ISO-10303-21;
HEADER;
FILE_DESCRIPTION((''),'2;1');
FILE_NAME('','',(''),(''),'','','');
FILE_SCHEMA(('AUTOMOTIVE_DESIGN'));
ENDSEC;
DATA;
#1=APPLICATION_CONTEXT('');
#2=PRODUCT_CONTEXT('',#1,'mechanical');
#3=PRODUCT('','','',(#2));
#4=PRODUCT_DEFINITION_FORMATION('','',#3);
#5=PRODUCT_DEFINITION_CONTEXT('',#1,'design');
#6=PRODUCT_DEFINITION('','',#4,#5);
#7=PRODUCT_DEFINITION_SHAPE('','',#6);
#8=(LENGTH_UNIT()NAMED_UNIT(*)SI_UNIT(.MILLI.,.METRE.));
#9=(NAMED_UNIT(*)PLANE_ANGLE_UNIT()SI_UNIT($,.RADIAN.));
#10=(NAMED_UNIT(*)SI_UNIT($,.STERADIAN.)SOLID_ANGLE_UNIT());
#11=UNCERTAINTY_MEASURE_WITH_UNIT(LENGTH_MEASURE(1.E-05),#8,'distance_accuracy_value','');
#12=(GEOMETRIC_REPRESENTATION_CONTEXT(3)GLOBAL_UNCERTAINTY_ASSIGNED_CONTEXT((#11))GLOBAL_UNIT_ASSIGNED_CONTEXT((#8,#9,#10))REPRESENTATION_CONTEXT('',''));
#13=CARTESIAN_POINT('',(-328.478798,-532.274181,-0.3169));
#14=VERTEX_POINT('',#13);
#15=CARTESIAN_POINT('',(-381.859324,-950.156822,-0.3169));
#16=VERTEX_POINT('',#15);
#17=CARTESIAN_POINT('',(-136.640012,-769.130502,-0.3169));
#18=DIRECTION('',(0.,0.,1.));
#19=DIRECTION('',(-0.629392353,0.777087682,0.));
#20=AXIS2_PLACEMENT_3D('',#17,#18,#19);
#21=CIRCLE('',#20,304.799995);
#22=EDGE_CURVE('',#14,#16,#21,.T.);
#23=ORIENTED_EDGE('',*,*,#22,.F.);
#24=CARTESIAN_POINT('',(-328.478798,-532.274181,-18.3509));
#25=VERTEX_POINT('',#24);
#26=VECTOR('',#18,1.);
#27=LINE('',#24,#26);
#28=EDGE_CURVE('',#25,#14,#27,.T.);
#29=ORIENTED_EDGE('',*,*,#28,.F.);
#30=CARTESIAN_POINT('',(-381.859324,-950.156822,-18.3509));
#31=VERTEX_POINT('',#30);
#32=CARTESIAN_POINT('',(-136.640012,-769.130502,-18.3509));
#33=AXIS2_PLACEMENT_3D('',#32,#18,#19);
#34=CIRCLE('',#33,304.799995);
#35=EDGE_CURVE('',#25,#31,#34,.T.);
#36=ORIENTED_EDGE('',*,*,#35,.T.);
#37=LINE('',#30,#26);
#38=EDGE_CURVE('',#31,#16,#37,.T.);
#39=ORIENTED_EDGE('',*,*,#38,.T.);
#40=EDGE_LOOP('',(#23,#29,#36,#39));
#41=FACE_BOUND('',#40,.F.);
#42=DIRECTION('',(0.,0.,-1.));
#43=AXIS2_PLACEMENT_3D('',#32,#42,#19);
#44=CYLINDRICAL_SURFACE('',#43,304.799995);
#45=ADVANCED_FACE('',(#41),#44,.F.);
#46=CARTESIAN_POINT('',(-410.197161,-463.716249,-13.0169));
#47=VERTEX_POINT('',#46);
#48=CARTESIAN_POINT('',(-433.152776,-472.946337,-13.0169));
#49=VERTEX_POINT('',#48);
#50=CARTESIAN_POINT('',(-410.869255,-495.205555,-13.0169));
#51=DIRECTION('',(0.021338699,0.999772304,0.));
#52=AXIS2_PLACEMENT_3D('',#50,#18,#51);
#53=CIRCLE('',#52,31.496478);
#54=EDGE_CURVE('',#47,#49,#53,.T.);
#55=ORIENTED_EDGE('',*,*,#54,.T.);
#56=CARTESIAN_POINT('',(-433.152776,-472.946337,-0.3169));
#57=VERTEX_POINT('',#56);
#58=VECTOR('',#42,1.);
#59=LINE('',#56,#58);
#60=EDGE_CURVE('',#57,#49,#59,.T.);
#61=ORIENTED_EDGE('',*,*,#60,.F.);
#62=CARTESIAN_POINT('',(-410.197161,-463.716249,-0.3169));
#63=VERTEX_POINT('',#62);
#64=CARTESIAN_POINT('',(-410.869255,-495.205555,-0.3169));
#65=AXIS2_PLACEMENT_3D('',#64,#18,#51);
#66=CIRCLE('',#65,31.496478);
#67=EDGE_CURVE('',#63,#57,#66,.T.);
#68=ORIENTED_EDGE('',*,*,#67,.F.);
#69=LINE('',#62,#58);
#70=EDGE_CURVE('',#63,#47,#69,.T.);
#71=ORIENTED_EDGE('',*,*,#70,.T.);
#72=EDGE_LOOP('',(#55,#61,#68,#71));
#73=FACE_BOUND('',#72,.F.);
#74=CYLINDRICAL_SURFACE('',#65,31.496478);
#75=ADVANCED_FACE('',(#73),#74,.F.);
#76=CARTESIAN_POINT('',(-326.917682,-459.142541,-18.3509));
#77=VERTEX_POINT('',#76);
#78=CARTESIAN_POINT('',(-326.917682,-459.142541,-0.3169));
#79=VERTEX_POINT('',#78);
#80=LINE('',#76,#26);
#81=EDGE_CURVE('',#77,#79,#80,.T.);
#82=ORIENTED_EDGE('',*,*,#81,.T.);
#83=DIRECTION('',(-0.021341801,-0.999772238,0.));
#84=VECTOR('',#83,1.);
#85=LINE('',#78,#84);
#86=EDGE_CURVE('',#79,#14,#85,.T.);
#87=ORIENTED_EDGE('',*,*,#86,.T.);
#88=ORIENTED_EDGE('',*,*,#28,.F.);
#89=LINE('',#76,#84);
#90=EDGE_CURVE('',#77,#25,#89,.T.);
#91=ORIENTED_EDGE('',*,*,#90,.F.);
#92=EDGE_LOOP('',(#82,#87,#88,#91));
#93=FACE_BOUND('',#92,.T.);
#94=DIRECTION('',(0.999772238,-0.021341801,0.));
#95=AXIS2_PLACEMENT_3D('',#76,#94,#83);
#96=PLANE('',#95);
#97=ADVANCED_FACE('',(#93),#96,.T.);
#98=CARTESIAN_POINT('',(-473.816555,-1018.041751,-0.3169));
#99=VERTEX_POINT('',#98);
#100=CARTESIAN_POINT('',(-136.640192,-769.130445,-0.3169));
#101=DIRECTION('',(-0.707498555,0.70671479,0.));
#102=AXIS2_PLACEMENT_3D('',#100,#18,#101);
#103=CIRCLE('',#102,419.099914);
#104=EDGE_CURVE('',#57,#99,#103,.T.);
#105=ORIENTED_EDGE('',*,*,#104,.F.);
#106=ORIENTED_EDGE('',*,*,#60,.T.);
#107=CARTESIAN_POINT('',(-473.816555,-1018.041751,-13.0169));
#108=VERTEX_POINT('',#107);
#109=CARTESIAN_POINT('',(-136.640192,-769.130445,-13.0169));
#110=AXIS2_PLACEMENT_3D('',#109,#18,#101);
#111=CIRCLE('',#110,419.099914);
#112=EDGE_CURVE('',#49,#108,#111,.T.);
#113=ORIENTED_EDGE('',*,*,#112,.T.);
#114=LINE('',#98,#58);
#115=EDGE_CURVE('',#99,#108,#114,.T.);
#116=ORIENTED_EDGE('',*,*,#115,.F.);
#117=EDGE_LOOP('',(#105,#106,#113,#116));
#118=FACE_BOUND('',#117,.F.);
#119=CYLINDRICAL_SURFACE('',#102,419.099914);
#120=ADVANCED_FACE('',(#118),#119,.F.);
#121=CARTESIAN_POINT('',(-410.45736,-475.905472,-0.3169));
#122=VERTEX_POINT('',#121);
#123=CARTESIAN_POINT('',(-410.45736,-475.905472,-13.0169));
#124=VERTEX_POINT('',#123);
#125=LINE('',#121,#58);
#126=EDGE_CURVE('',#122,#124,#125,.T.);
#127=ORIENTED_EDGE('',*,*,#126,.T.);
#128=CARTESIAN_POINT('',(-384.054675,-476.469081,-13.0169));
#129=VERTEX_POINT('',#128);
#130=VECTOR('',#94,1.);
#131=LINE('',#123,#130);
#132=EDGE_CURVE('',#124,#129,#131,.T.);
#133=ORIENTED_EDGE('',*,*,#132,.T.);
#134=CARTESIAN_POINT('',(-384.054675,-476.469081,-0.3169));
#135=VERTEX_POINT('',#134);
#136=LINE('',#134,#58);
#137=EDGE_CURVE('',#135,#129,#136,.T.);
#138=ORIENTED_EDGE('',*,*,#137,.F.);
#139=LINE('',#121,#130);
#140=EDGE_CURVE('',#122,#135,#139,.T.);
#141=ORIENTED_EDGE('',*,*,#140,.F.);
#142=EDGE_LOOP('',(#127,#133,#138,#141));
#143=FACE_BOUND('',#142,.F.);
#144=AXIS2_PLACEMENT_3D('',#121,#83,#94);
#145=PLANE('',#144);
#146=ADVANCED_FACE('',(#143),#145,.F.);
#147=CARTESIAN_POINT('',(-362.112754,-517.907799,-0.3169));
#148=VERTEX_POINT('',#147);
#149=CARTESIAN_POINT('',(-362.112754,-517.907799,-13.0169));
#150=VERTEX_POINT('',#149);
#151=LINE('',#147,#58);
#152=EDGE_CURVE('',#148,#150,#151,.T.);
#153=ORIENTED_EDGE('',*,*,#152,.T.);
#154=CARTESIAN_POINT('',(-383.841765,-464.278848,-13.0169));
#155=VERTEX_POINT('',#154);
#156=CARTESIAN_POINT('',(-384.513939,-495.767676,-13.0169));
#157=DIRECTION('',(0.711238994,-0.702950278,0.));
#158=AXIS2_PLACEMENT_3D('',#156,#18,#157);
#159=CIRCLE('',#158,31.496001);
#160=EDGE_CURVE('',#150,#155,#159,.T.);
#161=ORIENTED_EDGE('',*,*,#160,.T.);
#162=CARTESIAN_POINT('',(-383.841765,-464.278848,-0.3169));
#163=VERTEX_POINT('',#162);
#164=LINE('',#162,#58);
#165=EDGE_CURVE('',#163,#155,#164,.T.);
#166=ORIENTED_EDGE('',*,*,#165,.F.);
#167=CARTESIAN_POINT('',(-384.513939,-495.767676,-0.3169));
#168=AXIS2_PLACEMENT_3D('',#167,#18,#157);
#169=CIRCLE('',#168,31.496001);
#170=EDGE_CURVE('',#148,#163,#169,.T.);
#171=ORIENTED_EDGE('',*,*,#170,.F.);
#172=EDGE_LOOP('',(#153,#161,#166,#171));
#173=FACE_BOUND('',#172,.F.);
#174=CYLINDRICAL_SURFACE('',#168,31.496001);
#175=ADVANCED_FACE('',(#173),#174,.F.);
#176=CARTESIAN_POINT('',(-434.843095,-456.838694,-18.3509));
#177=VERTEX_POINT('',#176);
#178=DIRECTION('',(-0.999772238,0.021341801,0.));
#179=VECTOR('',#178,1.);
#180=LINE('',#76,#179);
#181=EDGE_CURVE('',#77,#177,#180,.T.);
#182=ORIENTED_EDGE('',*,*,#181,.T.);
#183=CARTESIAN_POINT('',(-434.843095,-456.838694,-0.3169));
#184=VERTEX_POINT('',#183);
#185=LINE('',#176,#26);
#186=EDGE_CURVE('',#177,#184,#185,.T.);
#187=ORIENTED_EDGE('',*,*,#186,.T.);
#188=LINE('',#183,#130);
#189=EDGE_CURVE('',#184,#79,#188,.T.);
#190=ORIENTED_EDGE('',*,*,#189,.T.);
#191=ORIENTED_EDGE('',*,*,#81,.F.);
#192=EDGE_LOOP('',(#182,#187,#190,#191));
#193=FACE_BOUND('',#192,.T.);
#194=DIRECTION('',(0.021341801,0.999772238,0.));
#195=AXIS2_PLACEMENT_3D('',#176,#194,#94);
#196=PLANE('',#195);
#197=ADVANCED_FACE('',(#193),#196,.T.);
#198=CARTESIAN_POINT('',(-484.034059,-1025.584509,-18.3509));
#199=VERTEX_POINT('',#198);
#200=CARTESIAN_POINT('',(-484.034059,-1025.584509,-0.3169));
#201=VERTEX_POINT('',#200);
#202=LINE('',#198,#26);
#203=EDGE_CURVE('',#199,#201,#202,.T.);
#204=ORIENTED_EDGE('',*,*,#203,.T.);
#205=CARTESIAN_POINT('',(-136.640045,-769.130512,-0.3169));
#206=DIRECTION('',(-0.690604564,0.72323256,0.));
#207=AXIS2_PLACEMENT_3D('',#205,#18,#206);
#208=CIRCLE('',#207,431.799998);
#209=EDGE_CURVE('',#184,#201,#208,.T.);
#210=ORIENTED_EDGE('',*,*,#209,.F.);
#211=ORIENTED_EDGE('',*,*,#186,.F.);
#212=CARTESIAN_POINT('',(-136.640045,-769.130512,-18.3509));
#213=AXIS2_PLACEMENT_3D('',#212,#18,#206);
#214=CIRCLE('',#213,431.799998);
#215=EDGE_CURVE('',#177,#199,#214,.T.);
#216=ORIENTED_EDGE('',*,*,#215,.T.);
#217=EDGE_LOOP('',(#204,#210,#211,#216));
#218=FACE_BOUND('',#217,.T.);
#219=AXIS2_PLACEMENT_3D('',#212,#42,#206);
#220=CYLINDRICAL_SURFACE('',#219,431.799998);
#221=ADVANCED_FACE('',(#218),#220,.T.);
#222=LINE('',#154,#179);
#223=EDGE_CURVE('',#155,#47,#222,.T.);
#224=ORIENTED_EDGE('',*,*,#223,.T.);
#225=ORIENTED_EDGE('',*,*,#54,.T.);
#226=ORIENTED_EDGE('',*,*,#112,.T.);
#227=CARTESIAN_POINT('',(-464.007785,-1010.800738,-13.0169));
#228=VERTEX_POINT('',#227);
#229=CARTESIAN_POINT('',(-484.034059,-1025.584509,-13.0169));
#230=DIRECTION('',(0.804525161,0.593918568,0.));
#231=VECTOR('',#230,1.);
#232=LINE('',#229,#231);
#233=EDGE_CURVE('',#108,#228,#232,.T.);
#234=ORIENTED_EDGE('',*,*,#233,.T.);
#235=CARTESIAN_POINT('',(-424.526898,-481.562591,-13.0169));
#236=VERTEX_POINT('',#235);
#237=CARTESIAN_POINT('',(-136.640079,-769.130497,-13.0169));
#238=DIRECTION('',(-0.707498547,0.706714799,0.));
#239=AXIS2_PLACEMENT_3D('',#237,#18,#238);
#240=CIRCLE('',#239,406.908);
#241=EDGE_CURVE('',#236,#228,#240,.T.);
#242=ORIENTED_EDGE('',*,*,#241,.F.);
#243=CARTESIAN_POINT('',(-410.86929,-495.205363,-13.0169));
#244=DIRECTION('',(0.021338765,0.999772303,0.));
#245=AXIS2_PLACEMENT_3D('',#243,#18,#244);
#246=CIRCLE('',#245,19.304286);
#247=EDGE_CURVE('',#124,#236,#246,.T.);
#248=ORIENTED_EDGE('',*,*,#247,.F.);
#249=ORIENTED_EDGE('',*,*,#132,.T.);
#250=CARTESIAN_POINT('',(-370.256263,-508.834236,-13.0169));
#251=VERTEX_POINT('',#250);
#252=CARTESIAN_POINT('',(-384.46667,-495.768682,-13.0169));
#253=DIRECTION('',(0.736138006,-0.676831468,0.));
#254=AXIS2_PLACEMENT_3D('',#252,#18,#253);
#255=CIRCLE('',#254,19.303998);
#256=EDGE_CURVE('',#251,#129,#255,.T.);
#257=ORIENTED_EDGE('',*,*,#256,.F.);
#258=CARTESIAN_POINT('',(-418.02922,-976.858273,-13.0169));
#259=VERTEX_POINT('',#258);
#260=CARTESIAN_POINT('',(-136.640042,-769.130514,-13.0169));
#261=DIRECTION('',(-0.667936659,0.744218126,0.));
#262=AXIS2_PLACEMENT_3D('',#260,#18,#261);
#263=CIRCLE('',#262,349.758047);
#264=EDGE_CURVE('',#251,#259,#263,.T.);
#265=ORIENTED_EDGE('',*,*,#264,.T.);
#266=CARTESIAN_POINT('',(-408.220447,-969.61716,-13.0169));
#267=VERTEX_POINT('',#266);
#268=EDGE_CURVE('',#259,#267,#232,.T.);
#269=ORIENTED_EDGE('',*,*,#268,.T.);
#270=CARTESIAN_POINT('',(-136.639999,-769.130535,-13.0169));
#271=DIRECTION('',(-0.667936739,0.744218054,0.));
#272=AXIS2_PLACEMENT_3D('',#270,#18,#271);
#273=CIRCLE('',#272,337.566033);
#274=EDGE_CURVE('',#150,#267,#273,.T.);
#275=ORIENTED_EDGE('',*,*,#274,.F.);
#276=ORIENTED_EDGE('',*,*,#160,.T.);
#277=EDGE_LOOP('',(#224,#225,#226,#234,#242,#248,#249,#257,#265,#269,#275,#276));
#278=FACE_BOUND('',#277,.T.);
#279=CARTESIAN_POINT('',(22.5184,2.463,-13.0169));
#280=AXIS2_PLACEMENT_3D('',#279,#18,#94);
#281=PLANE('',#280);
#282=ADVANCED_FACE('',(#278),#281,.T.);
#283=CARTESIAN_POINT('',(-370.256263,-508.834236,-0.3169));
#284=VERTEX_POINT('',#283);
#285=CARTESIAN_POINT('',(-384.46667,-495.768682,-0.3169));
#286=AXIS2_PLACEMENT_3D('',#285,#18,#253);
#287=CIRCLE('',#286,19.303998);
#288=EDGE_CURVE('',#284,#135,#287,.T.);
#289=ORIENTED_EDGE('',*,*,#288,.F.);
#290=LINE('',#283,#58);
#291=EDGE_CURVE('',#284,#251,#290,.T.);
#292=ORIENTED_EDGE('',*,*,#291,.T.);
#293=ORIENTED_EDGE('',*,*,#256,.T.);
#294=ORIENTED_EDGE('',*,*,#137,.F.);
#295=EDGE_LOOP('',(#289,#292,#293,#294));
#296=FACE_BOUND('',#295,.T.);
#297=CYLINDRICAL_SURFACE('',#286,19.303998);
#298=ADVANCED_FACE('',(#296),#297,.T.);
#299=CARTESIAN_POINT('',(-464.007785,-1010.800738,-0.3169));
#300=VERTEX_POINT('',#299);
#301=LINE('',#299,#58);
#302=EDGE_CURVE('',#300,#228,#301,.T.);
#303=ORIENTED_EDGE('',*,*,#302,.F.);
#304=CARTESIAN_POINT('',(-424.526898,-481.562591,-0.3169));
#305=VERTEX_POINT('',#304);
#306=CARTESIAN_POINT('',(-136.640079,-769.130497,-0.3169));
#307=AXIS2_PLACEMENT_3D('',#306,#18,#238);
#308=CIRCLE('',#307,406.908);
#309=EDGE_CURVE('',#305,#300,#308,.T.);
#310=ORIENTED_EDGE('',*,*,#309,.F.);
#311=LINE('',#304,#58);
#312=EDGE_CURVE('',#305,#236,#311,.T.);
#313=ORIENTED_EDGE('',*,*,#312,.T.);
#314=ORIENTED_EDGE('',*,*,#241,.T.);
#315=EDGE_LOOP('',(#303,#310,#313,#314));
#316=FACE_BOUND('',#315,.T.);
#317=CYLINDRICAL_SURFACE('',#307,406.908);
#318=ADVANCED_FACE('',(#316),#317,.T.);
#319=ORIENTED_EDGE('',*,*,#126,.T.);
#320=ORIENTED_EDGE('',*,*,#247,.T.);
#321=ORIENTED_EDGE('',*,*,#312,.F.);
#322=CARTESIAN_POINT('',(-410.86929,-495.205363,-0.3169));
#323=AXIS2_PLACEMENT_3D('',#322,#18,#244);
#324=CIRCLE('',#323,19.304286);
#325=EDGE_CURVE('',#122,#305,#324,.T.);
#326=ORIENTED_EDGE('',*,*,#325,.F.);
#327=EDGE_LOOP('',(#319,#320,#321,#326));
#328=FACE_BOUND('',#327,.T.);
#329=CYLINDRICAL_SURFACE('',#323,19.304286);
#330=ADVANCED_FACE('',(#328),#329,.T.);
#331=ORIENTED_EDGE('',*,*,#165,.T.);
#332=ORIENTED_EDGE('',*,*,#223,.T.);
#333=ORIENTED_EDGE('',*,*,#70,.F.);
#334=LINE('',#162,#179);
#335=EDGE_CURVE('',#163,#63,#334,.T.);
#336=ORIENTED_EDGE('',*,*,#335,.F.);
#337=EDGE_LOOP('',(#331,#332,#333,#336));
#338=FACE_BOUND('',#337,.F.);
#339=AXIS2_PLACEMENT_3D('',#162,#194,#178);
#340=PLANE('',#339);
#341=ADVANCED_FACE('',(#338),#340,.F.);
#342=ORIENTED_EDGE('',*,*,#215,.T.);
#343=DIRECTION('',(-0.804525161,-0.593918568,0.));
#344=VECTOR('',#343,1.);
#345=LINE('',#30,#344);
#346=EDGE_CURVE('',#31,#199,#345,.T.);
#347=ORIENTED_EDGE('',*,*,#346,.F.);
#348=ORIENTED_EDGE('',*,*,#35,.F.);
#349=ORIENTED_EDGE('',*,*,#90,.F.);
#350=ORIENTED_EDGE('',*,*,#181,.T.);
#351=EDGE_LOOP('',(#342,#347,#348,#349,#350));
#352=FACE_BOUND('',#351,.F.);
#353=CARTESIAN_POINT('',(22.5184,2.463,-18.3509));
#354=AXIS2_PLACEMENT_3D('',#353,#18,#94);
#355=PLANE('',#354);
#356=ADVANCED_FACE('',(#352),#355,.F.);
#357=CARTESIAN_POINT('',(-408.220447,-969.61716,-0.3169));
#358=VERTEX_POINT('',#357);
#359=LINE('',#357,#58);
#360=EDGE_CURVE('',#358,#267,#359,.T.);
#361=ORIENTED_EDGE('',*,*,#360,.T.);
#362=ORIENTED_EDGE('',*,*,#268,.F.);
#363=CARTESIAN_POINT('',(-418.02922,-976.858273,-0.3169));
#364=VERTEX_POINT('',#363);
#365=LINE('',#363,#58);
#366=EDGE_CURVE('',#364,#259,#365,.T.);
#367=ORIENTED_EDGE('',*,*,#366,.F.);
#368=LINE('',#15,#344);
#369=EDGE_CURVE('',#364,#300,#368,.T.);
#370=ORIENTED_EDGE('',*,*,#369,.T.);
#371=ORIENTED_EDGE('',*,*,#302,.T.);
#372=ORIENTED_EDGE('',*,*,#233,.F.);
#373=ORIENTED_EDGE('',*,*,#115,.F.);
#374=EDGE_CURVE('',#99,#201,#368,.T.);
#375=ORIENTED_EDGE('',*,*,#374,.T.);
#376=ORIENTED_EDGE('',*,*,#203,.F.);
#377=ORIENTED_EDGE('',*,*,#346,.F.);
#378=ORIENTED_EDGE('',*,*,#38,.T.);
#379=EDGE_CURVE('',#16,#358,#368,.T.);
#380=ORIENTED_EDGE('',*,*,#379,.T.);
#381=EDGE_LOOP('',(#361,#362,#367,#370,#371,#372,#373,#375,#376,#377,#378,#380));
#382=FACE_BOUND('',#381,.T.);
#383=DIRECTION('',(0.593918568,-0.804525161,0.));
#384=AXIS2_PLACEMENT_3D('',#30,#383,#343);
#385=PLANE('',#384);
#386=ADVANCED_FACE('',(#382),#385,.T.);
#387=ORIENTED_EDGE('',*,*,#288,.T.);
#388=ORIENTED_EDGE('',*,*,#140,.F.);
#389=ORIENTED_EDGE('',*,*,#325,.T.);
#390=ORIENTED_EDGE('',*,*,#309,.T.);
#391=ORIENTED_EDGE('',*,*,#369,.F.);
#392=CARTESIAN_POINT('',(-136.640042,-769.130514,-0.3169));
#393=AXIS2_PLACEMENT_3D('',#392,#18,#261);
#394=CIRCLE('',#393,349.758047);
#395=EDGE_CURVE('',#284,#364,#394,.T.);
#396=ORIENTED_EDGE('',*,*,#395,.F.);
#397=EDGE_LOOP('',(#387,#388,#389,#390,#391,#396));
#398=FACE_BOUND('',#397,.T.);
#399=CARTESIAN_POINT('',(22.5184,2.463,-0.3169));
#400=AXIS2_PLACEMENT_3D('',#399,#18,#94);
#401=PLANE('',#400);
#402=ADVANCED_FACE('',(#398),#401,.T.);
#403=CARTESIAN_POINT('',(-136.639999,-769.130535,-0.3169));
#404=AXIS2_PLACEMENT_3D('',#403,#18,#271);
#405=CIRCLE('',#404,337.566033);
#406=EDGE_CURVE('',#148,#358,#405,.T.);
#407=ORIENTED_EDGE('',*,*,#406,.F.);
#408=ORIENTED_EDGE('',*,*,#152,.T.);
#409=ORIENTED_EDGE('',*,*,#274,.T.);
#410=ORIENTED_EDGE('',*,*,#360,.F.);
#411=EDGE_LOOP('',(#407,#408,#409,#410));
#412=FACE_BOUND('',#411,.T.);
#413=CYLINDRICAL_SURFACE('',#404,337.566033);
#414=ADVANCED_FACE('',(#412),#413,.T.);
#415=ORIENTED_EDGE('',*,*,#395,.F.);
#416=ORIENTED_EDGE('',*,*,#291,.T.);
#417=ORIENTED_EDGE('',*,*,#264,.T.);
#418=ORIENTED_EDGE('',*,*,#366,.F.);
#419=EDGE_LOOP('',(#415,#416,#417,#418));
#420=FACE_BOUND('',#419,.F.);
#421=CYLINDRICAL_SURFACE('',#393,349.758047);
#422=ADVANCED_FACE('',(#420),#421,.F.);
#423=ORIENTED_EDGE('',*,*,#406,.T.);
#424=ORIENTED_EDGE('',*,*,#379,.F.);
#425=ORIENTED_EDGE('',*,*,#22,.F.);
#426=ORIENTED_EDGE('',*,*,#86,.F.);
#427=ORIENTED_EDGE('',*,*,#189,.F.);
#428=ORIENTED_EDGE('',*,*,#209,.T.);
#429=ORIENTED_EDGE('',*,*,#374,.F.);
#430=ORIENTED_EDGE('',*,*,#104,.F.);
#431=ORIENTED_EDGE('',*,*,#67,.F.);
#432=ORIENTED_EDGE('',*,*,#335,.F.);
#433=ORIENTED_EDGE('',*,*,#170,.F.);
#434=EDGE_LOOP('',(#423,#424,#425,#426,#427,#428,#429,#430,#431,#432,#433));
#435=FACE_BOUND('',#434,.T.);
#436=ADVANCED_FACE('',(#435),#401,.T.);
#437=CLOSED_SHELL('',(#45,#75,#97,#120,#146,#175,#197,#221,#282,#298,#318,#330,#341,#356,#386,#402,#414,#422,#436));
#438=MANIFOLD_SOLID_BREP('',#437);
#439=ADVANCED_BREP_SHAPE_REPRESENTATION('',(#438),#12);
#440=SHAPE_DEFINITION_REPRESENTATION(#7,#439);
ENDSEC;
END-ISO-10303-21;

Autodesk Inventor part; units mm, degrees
ref_plane "YZ Plane" through (0, 0, 0) normal (1, 0, 0) x (0, 1, 0)
ref_plane "XZ Plane" through (0, 0, 0) normal (0, 1, 0) x (-1, 0, 0)
ref_plane "Work Plane1" through (22.5184, 2.463, -18.3509) normal (0, 0, 1) x (0.9997722, -0.0213418, 0)
sketch "ThermoBulbBorder" plane through (22.5184, 2.463, -18.3509) normal (0, 0, 1) x (0.9997722, -0.0213418, 0)
  arc A0 (-447.455, -468.958) -> (162.145, -468.958) centre (-142.655, -774.8145) ccw
  arc A1 (-339.505, -542.1063) -> (98.645, -588.5959) centre (-142.655, -774.8145) ccw
  line L0 (-447.455, -468.958) -> (-339.505, -468.958)
  line L1 (162.145, -468.958) -> (98.645, -468.958)
  line L2 (98.645, -468.958) -> (98.645, -588.5959)
  line L3 (-383.955, -961.033) -> (-484.4967, -1038.6241)
  line L4 (98.645, -961.033) -> (199.1867, -1038.6241)
  arc A2 (-447.455, -468.958) -> (162.145, -468.958) centre (-142.655, -774.8145) ccw projected
  line L5 (98.645, -468.958) -> (98.645, -316.558) construction
  line L6 (-339.505, -468.958) -> (-339.505, -542.1063)
  line L7 (-383.955, -468.958) -> (-383.955, 914.2855) projected
  line L8 (-447.455, 914.2855) -> (-447.455, -468.958) projected
  line L9 (-383.955, -468.958) -> (-383.955, -961.033) construction
  dimension "d0" = 609.6
  dimension "d6" = 63.5
  dimension "d12" = 152.4
  dimension "d53" = 107.95
extrude "Extrusion6" add sketch "ThermoBulbBorder" along normal blind 18.034 contours L0 L6 A1 L3 A0
sketch "Sketch3" plane through (22.5184, 2.463, -0.3169) normal (0, 0, 1) x (0.9997722, -0.0213418, 0)
  arc A0 (-447.455, -468.958) -> (-484.4967, -1038.6241) centre (-142.655, -774.8145) ccw projected
  line L0 (-484.4967, -1038.6241) -> (-383.955, -961.033) projected
  arc A1 (-339.505, -542.1063) -> (-383.955, -961.033) centre (-142.655, -774.8145) ccw projected
  line L1 (-339.505, -468.958) -> (-447.455, -468.958) projected
  arc A2 (-429.1801, -468.958) -> (-435.8114, -475.308) centre (-142.655, -774.8145) ccw construction
  arc A3 (-436.6135, -493.4561) -> (-464.7905, -1023.4163) centre (-142.655, -774.8145) ccw
  line L2 (-474.4425, -1030.865) -> (-464.7905, -1023.4163)
  arc A4 (-373.4379, -528.461) -> (-409.8948, -981.0515) centre (-142.655, -774.8145) ccw
  line L3 (-142.655, -774.8145) -> (-429.1801, -468.958) construction
  line L4 (-419.5468, -988.5003) -> (-409.8948, -981.0515)
  line L5 (-396.3065, -475.308) -> (-422.6679, -475.308)
  line L6 (-422.6679, -487.5) -> (-396.2592, -487.5)
  arc A5 (-445.4213, -485.0259) -> (-474.4425, -1030.865) centre (-142.655, -774.8145) ccw
  arc A6 (-381.7732, -519.5633) -> (-396.2592, -487.5) centre (-396.2592, -506.804) ccw
  arc A7 (-373.4379, -528.461) -> (-396.3065, -475.308) centre (-396.3065, -506.804) ccw
  arc A8 (-422.6679, -487.5) -> (-436.6135, -493.4561) centre (-422.6679, -506.804) ccw
  arc A9 (-422.6679, -475.308) -> (-445.4213, -485.0259) centre (-422.6679, -506.804) ccw
  arc A10 (-381.7732, -519.5633) -> (-419.5468, -988.5003) centre (-142.655, -774.8145) ccw
  point P0 (-22.4607, -2.943)
  point P1 (-383.955, -468.958)
  point P2 (-430.7947, -487.5)
  dimension "d56" = 12.7
  dimension "d57" = 12.192
  dimension "d61" = 63.5
  dimension "d62" = 6.35
  dimension "d63" = 12.192
  dimension "d64" = 19.304
  dimension "d65" = 31.496
  dimension "d66" = 19.304
  dimension "d67" = 31.496
  dimension "d68" = 57.15
  dimension "d69" = 12.192
extrude "Extrusion7" cut sketch "Sketch3" against normal blind 12.7 contours A5 A9 L5 A7 A4 L0 A10 A6 L6 A8 A3
equation "\"d6\" = d5"
equation "\"d57\" = bRopeChannel"
equation "\"d63\" = bRopeChannel"
equation "\"d69\" = bRopeChannel"
equation "\"bRopeChannel\" = 12.192"
equation "\"d8\" = bRopeChannel"
equation "\"d9\" = bRopeChannel"
equation "\"d38\" = bRopeChannel"
equation "\"d60\" = bRopeChannel"
equation "\"d5\" = 63.5"
properties part number "HOT Thermo bulb outline L" material "Rubber, Butyl"
